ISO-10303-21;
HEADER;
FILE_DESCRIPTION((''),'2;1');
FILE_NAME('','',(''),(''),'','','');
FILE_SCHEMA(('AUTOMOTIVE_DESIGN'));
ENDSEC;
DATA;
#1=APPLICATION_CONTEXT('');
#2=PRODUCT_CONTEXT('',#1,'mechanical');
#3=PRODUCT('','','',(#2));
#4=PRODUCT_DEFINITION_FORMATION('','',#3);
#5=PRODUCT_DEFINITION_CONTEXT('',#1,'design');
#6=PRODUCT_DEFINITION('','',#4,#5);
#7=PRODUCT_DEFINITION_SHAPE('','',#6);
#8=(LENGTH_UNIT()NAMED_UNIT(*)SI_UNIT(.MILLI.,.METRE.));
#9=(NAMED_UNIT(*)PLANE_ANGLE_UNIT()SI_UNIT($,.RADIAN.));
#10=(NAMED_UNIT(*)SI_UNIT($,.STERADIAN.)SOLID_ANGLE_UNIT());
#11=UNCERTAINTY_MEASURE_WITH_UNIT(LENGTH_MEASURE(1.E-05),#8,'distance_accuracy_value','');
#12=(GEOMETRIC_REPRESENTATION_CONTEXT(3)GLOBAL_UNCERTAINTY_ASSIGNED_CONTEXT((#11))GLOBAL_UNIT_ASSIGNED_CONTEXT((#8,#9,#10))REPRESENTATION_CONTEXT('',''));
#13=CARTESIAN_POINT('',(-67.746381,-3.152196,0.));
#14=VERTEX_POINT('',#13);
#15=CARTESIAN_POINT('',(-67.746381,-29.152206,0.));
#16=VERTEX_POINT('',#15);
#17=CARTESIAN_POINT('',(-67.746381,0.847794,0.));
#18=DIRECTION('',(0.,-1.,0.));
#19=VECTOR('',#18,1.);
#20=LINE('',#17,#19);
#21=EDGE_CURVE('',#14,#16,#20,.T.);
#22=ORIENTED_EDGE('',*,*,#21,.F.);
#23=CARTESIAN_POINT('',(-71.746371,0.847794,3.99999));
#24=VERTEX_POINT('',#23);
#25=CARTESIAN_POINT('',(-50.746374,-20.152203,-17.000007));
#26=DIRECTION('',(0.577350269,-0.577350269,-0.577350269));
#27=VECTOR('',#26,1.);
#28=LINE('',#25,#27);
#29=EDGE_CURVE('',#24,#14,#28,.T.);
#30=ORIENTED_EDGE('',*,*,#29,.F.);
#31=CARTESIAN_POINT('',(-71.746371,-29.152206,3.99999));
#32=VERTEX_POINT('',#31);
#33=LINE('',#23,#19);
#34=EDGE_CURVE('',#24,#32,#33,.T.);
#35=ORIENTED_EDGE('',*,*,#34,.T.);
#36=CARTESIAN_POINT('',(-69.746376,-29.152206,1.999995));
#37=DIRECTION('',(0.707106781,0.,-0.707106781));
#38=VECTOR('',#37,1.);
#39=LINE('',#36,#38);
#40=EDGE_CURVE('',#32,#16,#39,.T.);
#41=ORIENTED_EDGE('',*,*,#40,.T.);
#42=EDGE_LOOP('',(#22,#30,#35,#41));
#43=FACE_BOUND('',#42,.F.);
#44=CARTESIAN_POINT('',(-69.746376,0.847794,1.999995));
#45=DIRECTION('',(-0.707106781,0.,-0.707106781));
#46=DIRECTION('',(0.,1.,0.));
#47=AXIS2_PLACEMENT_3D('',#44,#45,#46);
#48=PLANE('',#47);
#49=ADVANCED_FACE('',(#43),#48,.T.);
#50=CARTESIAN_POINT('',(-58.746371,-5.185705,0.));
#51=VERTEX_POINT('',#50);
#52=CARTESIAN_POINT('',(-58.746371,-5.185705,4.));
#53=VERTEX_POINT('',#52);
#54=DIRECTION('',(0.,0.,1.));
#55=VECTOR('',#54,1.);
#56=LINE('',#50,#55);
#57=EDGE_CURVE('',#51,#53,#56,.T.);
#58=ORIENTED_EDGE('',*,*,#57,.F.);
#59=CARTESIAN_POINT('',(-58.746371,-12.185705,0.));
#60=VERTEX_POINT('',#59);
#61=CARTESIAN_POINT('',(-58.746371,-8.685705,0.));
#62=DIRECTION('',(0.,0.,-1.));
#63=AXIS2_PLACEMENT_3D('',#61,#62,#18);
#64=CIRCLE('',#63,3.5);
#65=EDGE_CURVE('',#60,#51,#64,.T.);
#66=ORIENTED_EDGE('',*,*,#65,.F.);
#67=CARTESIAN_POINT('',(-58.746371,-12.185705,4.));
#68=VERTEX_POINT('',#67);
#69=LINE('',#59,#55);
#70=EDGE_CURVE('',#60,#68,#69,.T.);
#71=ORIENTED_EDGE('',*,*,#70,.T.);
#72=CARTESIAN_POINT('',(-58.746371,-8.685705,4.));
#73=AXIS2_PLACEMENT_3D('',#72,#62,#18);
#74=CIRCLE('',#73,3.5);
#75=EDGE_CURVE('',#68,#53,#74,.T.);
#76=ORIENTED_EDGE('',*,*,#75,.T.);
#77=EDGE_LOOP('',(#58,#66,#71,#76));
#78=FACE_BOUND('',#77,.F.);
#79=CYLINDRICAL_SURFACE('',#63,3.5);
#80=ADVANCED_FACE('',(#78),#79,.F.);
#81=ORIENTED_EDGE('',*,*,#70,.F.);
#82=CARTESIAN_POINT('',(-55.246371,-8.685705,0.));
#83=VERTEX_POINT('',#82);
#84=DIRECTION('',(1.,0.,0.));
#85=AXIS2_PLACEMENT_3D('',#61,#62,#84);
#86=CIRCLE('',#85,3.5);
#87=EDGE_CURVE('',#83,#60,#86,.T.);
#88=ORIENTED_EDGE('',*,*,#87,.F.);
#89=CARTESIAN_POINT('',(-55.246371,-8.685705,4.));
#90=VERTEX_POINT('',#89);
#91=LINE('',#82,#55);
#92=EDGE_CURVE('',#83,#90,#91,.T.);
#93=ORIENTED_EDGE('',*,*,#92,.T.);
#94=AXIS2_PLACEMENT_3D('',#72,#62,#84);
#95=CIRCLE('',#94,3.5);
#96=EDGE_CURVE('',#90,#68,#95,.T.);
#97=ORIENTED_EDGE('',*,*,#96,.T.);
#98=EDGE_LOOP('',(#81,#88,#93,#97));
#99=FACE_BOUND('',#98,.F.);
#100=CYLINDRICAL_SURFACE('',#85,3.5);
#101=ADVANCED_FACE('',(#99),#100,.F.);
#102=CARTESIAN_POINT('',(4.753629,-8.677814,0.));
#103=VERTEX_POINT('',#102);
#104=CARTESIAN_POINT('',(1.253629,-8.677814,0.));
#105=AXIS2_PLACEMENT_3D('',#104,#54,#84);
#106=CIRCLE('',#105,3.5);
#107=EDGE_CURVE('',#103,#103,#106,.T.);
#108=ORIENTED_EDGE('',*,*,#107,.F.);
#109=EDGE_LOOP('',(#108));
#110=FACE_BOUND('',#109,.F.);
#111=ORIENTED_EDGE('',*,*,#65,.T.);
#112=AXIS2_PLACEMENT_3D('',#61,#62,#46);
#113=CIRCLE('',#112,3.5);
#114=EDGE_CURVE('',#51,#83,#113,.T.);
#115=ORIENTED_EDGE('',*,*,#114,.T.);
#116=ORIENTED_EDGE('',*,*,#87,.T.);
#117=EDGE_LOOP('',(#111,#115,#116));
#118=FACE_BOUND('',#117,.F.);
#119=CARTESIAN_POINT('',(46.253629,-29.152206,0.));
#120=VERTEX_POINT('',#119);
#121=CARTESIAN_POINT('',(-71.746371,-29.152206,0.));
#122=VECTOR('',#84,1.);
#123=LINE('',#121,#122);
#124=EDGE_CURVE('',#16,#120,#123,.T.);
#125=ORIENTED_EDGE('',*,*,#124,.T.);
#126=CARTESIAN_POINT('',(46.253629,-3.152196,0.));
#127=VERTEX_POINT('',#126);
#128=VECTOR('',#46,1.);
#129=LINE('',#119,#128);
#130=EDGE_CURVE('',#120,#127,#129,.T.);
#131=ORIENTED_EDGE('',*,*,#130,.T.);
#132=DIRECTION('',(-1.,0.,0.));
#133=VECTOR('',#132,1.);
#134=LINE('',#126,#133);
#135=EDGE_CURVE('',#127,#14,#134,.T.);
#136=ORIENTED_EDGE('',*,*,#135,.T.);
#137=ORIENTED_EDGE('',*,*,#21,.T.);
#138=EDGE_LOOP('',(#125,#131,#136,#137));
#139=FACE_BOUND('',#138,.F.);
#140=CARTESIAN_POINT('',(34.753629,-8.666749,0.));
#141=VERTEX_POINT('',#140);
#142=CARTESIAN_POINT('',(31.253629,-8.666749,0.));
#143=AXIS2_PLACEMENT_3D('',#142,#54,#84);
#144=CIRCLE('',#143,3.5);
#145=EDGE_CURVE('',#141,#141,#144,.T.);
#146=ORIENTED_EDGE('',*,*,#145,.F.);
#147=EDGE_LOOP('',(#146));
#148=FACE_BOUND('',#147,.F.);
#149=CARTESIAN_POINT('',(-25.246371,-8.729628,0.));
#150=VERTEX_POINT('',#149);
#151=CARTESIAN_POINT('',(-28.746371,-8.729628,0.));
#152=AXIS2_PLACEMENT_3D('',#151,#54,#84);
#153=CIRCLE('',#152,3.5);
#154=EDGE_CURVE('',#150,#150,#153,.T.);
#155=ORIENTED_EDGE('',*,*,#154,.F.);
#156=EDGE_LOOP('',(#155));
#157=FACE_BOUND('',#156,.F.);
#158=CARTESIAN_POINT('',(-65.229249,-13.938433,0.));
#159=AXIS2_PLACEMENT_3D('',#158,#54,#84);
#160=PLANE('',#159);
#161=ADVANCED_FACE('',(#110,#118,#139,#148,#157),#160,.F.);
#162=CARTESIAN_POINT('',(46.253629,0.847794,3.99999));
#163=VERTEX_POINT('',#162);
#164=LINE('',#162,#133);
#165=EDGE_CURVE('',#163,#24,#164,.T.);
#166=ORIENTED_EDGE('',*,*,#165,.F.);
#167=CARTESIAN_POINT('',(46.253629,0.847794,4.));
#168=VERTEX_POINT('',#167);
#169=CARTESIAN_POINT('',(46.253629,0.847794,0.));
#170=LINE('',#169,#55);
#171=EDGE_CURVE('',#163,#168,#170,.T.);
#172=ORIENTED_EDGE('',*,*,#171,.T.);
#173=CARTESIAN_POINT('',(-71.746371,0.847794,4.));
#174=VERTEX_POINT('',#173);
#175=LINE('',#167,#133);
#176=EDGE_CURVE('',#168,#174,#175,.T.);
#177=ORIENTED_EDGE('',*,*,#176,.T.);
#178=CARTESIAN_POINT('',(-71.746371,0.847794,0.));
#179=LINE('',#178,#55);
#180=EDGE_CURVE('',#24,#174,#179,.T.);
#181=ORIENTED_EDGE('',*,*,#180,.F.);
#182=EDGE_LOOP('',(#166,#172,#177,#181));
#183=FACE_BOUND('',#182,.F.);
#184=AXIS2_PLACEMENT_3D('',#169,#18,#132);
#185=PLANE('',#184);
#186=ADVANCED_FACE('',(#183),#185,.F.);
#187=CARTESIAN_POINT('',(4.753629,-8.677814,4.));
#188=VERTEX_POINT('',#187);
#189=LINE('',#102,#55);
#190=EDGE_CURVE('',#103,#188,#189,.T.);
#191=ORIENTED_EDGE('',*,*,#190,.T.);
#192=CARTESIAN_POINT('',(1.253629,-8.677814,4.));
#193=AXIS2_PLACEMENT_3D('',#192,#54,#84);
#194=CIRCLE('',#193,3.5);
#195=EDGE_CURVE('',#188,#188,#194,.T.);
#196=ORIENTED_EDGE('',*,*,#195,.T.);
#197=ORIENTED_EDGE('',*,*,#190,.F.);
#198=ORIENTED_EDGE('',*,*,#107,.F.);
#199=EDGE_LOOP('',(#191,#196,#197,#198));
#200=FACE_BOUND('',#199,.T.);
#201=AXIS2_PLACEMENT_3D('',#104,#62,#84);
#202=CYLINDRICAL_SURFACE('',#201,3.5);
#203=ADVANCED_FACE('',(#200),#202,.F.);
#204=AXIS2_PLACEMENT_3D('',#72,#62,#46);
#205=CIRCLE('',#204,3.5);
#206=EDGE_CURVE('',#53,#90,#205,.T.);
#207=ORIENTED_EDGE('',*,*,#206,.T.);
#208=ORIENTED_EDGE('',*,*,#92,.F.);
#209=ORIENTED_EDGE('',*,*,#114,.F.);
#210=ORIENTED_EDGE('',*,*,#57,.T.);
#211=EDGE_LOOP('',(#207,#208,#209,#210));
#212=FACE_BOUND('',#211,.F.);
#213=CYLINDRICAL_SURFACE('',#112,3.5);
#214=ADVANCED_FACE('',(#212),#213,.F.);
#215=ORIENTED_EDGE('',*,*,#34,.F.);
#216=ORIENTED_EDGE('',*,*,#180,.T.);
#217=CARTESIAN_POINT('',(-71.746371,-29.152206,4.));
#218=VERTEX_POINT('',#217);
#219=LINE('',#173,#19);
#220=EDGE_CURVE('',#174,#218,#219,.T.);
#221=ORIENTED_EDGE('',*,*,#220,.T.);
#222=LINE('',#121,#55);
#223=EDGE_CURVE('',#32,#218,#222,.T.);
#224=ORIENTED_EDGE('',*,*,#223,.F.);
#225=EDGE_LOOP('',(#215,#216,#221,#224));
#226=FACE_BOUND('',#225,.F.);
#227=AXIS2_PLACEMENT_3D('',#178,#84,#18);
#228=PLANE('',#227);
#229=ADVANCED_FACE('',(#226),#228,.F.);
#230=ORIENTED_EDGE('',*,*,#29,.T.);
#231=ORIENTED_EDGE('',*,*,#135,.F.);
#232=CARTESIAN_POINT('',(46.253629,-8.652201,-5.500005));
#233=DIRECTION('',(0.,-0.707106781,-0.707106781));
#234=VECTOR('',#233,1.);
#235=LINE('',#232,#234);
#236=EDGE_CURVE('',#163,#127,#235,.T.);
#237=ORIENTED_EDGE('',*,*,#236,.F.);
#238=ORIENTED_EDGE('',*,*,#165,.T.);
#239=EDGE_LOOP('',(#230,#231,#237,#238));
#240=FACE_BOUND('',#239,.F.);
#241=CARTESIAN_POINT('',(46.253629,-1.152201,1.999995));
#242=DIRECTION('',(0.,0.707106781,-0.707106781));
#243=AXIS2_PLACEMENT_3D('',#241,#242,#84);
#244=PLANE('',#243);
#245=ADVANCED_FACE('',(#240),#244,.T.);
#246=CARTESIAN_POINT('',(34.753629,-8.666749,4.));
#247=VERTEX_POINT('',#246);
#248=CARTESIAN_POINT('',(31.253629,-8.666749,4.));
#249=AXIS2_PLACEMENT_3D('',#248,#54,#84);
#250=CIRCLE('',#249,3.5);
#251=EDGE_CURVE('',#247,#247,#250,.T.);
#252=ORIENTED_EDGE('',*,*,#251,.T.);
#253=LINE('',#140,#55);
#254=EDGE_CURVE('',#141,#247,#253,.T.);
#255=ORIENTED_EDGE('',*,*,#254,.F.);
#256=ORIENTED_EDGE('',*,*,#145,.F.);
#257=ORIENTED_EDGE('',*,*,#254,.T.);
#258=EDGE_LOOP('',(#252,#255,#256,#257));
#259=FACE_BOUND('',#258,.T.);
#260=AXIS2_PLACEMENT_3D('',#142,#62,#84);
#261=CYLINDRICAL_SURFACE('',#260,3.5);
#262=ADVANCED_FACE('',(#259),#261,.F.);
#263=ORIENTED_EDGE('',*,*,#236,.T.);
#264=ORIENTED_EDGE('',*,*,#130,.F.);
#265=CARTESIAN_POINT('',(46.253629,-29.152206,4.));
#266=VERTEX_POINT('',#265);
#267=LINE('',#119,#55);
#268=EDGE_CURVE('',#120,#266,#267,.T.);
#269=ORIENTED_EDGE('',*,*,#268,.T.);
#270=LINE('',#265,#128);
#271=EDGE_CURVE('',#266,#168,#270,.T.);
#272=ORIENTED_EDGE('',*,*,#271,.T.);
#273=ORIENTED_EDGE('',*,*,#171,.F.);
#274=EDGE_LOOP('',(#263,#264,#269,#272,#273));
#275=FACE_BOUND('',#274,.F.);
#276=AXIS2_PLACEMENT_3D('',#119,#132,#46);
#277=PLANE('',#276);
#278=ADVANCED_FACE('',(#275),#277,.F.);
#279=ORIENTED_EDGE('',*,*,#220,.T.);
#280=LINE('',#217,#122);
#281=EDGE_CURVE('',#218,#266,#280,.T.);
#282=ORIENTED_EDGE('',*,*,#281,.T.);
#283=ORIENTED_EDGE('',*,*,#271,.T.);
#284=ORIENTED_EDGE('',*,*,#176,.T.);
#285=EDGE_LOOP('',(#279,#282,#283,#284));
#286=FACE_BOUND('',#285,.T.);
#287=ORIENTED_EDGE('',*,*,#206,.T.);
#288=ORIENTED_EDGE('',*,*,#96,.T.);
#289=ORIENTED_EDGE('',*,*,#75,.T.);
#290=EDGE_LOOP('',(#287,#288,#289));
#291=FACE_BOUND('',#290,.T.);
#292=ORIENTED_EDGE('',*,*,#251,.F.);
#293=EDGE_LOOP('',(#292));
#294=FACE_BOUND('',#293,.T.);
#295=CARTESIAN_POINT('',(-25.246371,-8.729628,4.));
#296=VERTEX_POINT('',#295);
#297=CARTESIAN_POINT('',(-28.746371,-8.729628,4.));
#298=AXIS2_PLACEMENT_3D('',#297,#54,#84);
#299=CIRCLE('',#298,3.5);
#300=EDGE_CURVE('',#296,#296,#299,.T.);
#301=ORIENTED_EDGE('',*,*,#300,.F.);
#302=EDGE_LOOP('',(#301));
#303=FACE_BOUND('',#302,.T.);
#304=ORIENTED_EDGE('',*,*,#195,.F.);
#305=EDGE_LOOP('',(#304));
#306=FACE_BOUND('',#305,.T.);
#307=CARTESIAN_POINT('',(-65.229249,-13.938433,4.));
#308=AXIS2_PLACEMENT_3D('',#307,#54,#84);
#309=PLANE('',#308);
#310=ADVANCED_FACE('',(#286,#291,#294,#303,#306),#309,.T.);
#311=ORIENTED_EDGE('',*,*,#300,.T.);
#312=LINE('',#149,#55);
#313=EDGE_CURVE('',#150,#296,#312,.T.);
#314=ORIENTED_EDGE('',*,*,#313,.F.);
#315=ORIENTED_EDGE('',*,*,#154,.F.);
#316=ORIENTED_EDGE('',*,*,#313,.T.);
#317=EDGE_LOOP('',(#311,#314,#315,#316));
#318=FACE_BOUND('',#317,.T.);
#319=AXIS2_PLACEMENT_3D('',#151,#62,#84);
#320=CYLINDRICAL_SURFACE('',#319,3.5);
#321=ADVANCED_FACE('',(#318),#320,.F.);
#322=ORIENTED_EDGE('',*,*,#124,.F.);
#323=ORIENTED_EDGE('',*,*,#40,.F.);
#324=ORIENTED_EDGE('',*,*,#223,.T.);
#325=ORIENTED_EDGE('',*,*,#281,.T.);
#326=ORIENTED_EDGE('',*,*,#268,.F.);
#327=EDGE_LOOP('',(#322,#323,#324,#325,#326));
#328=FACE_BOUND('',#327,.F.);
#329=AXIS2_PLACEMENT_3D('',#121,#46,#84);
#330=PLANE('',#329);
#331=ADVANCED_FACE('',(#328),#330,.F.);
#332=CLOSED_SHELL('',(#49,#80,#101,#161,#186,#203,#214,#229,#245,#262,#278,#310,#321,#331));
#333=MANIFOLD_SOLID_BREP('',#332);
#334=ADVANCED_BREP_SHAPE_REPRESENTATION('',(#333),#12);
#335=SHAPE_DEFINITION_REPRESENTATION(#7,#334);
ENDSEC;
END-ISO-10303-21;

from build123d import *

# Parameters (mm, degrees)
F0_R     = 3.5
F1_DEPTH = 4
F2_SIZE  = 3.99999


# Not quite as in the source:
# - a fillet or chamfer is up to 0.001 mm smaller than in the source, because OpenCascade refuses the exact size


with BuildPart() as f1:
    # F0 (on Top) → F1 (new body)
    with BuildSketch(Plane.XY):
        with BuildLine():
            Line((-58.7463706657, 0.847793646), (-71.7463706657, 0.847793646))
            Line((-71.7463706657, 0.847793646), (-71.7463706657, -3.152206354))
            Line((-71.7463706657, -3.152206354), (-71.7463706657, -5.152206354))
            Line((-71.7463706657, -5.152206354), (-71.7463706657, -29.152206354))
            Line((-71.7463706657, -29.152206354), (-58.7463706657, -29.152206354))
            Line((-58.7463706657, -29.152206354), (-58.7463706657, -12.1857047902))
            ThreePointArc((-58.7463706657, -12.1857047902), (-62.2463706657, -8.6857047902), (-58.7463706657, -5.1857047902))
            Line((-58.7463706657, -5.1857047902), (-58.7463706657, 0.847793646))
        make_face()
        with BuildLine():
            Line((46.2536293343, 0.847793646), (-58.7463706657, 0.847793646))
            Line((-58.7463706657, 0.847793646), (-58.7463706657, -5.1857047902))
            ThreePointArc((-58.7463706657, -5.1857047902), (-56.2714969316, -6.2108310561), (-55.2463706657, -8.6857047902))
            ThreePointArc((-55.2463706657, -8.6857047902), (-56.2714969316, -11.1605785244), (-58.7463706657, -12.1857047902))
            Line((-58.7463706657, -12.1857047902), (-58.7463706657, -29.152206354))
            Line((-58.7463706657, -29.152206354), (46.2536293343, -29.152206354))
            Line((46.2536293343, -29.152206354), (46.2536293343, 0.847793646))
        make_face()
        with Locations((-28.7463706657, -8.7296278255)):
            Circle(F0_R, mode=Mode.SUBTRACT)
        with Locations((1.2536293343, -8.6778136941)):
            Circle(F0_R, mode=Mode.SUBTRACT)
        with Locations((31.2536293343, -8.6667486506)):
            Circle(F0_R, mode=Mode.SUBTRACT)
    extrude(amount=F1_DEPTH)

    # F2 (size 4 in the source; OpenCascade refuses exactly that, so slightly less here)
    f2_edges = [f1.edges().sort_by_distance(p)[0] for p in [
        (-71.746371, -14.152206, 0),
        (-12.746371, 0.847794, 0),
    ]]
    chamfer(f2_edges, length=F2_SIZE)


solid = f1.part
